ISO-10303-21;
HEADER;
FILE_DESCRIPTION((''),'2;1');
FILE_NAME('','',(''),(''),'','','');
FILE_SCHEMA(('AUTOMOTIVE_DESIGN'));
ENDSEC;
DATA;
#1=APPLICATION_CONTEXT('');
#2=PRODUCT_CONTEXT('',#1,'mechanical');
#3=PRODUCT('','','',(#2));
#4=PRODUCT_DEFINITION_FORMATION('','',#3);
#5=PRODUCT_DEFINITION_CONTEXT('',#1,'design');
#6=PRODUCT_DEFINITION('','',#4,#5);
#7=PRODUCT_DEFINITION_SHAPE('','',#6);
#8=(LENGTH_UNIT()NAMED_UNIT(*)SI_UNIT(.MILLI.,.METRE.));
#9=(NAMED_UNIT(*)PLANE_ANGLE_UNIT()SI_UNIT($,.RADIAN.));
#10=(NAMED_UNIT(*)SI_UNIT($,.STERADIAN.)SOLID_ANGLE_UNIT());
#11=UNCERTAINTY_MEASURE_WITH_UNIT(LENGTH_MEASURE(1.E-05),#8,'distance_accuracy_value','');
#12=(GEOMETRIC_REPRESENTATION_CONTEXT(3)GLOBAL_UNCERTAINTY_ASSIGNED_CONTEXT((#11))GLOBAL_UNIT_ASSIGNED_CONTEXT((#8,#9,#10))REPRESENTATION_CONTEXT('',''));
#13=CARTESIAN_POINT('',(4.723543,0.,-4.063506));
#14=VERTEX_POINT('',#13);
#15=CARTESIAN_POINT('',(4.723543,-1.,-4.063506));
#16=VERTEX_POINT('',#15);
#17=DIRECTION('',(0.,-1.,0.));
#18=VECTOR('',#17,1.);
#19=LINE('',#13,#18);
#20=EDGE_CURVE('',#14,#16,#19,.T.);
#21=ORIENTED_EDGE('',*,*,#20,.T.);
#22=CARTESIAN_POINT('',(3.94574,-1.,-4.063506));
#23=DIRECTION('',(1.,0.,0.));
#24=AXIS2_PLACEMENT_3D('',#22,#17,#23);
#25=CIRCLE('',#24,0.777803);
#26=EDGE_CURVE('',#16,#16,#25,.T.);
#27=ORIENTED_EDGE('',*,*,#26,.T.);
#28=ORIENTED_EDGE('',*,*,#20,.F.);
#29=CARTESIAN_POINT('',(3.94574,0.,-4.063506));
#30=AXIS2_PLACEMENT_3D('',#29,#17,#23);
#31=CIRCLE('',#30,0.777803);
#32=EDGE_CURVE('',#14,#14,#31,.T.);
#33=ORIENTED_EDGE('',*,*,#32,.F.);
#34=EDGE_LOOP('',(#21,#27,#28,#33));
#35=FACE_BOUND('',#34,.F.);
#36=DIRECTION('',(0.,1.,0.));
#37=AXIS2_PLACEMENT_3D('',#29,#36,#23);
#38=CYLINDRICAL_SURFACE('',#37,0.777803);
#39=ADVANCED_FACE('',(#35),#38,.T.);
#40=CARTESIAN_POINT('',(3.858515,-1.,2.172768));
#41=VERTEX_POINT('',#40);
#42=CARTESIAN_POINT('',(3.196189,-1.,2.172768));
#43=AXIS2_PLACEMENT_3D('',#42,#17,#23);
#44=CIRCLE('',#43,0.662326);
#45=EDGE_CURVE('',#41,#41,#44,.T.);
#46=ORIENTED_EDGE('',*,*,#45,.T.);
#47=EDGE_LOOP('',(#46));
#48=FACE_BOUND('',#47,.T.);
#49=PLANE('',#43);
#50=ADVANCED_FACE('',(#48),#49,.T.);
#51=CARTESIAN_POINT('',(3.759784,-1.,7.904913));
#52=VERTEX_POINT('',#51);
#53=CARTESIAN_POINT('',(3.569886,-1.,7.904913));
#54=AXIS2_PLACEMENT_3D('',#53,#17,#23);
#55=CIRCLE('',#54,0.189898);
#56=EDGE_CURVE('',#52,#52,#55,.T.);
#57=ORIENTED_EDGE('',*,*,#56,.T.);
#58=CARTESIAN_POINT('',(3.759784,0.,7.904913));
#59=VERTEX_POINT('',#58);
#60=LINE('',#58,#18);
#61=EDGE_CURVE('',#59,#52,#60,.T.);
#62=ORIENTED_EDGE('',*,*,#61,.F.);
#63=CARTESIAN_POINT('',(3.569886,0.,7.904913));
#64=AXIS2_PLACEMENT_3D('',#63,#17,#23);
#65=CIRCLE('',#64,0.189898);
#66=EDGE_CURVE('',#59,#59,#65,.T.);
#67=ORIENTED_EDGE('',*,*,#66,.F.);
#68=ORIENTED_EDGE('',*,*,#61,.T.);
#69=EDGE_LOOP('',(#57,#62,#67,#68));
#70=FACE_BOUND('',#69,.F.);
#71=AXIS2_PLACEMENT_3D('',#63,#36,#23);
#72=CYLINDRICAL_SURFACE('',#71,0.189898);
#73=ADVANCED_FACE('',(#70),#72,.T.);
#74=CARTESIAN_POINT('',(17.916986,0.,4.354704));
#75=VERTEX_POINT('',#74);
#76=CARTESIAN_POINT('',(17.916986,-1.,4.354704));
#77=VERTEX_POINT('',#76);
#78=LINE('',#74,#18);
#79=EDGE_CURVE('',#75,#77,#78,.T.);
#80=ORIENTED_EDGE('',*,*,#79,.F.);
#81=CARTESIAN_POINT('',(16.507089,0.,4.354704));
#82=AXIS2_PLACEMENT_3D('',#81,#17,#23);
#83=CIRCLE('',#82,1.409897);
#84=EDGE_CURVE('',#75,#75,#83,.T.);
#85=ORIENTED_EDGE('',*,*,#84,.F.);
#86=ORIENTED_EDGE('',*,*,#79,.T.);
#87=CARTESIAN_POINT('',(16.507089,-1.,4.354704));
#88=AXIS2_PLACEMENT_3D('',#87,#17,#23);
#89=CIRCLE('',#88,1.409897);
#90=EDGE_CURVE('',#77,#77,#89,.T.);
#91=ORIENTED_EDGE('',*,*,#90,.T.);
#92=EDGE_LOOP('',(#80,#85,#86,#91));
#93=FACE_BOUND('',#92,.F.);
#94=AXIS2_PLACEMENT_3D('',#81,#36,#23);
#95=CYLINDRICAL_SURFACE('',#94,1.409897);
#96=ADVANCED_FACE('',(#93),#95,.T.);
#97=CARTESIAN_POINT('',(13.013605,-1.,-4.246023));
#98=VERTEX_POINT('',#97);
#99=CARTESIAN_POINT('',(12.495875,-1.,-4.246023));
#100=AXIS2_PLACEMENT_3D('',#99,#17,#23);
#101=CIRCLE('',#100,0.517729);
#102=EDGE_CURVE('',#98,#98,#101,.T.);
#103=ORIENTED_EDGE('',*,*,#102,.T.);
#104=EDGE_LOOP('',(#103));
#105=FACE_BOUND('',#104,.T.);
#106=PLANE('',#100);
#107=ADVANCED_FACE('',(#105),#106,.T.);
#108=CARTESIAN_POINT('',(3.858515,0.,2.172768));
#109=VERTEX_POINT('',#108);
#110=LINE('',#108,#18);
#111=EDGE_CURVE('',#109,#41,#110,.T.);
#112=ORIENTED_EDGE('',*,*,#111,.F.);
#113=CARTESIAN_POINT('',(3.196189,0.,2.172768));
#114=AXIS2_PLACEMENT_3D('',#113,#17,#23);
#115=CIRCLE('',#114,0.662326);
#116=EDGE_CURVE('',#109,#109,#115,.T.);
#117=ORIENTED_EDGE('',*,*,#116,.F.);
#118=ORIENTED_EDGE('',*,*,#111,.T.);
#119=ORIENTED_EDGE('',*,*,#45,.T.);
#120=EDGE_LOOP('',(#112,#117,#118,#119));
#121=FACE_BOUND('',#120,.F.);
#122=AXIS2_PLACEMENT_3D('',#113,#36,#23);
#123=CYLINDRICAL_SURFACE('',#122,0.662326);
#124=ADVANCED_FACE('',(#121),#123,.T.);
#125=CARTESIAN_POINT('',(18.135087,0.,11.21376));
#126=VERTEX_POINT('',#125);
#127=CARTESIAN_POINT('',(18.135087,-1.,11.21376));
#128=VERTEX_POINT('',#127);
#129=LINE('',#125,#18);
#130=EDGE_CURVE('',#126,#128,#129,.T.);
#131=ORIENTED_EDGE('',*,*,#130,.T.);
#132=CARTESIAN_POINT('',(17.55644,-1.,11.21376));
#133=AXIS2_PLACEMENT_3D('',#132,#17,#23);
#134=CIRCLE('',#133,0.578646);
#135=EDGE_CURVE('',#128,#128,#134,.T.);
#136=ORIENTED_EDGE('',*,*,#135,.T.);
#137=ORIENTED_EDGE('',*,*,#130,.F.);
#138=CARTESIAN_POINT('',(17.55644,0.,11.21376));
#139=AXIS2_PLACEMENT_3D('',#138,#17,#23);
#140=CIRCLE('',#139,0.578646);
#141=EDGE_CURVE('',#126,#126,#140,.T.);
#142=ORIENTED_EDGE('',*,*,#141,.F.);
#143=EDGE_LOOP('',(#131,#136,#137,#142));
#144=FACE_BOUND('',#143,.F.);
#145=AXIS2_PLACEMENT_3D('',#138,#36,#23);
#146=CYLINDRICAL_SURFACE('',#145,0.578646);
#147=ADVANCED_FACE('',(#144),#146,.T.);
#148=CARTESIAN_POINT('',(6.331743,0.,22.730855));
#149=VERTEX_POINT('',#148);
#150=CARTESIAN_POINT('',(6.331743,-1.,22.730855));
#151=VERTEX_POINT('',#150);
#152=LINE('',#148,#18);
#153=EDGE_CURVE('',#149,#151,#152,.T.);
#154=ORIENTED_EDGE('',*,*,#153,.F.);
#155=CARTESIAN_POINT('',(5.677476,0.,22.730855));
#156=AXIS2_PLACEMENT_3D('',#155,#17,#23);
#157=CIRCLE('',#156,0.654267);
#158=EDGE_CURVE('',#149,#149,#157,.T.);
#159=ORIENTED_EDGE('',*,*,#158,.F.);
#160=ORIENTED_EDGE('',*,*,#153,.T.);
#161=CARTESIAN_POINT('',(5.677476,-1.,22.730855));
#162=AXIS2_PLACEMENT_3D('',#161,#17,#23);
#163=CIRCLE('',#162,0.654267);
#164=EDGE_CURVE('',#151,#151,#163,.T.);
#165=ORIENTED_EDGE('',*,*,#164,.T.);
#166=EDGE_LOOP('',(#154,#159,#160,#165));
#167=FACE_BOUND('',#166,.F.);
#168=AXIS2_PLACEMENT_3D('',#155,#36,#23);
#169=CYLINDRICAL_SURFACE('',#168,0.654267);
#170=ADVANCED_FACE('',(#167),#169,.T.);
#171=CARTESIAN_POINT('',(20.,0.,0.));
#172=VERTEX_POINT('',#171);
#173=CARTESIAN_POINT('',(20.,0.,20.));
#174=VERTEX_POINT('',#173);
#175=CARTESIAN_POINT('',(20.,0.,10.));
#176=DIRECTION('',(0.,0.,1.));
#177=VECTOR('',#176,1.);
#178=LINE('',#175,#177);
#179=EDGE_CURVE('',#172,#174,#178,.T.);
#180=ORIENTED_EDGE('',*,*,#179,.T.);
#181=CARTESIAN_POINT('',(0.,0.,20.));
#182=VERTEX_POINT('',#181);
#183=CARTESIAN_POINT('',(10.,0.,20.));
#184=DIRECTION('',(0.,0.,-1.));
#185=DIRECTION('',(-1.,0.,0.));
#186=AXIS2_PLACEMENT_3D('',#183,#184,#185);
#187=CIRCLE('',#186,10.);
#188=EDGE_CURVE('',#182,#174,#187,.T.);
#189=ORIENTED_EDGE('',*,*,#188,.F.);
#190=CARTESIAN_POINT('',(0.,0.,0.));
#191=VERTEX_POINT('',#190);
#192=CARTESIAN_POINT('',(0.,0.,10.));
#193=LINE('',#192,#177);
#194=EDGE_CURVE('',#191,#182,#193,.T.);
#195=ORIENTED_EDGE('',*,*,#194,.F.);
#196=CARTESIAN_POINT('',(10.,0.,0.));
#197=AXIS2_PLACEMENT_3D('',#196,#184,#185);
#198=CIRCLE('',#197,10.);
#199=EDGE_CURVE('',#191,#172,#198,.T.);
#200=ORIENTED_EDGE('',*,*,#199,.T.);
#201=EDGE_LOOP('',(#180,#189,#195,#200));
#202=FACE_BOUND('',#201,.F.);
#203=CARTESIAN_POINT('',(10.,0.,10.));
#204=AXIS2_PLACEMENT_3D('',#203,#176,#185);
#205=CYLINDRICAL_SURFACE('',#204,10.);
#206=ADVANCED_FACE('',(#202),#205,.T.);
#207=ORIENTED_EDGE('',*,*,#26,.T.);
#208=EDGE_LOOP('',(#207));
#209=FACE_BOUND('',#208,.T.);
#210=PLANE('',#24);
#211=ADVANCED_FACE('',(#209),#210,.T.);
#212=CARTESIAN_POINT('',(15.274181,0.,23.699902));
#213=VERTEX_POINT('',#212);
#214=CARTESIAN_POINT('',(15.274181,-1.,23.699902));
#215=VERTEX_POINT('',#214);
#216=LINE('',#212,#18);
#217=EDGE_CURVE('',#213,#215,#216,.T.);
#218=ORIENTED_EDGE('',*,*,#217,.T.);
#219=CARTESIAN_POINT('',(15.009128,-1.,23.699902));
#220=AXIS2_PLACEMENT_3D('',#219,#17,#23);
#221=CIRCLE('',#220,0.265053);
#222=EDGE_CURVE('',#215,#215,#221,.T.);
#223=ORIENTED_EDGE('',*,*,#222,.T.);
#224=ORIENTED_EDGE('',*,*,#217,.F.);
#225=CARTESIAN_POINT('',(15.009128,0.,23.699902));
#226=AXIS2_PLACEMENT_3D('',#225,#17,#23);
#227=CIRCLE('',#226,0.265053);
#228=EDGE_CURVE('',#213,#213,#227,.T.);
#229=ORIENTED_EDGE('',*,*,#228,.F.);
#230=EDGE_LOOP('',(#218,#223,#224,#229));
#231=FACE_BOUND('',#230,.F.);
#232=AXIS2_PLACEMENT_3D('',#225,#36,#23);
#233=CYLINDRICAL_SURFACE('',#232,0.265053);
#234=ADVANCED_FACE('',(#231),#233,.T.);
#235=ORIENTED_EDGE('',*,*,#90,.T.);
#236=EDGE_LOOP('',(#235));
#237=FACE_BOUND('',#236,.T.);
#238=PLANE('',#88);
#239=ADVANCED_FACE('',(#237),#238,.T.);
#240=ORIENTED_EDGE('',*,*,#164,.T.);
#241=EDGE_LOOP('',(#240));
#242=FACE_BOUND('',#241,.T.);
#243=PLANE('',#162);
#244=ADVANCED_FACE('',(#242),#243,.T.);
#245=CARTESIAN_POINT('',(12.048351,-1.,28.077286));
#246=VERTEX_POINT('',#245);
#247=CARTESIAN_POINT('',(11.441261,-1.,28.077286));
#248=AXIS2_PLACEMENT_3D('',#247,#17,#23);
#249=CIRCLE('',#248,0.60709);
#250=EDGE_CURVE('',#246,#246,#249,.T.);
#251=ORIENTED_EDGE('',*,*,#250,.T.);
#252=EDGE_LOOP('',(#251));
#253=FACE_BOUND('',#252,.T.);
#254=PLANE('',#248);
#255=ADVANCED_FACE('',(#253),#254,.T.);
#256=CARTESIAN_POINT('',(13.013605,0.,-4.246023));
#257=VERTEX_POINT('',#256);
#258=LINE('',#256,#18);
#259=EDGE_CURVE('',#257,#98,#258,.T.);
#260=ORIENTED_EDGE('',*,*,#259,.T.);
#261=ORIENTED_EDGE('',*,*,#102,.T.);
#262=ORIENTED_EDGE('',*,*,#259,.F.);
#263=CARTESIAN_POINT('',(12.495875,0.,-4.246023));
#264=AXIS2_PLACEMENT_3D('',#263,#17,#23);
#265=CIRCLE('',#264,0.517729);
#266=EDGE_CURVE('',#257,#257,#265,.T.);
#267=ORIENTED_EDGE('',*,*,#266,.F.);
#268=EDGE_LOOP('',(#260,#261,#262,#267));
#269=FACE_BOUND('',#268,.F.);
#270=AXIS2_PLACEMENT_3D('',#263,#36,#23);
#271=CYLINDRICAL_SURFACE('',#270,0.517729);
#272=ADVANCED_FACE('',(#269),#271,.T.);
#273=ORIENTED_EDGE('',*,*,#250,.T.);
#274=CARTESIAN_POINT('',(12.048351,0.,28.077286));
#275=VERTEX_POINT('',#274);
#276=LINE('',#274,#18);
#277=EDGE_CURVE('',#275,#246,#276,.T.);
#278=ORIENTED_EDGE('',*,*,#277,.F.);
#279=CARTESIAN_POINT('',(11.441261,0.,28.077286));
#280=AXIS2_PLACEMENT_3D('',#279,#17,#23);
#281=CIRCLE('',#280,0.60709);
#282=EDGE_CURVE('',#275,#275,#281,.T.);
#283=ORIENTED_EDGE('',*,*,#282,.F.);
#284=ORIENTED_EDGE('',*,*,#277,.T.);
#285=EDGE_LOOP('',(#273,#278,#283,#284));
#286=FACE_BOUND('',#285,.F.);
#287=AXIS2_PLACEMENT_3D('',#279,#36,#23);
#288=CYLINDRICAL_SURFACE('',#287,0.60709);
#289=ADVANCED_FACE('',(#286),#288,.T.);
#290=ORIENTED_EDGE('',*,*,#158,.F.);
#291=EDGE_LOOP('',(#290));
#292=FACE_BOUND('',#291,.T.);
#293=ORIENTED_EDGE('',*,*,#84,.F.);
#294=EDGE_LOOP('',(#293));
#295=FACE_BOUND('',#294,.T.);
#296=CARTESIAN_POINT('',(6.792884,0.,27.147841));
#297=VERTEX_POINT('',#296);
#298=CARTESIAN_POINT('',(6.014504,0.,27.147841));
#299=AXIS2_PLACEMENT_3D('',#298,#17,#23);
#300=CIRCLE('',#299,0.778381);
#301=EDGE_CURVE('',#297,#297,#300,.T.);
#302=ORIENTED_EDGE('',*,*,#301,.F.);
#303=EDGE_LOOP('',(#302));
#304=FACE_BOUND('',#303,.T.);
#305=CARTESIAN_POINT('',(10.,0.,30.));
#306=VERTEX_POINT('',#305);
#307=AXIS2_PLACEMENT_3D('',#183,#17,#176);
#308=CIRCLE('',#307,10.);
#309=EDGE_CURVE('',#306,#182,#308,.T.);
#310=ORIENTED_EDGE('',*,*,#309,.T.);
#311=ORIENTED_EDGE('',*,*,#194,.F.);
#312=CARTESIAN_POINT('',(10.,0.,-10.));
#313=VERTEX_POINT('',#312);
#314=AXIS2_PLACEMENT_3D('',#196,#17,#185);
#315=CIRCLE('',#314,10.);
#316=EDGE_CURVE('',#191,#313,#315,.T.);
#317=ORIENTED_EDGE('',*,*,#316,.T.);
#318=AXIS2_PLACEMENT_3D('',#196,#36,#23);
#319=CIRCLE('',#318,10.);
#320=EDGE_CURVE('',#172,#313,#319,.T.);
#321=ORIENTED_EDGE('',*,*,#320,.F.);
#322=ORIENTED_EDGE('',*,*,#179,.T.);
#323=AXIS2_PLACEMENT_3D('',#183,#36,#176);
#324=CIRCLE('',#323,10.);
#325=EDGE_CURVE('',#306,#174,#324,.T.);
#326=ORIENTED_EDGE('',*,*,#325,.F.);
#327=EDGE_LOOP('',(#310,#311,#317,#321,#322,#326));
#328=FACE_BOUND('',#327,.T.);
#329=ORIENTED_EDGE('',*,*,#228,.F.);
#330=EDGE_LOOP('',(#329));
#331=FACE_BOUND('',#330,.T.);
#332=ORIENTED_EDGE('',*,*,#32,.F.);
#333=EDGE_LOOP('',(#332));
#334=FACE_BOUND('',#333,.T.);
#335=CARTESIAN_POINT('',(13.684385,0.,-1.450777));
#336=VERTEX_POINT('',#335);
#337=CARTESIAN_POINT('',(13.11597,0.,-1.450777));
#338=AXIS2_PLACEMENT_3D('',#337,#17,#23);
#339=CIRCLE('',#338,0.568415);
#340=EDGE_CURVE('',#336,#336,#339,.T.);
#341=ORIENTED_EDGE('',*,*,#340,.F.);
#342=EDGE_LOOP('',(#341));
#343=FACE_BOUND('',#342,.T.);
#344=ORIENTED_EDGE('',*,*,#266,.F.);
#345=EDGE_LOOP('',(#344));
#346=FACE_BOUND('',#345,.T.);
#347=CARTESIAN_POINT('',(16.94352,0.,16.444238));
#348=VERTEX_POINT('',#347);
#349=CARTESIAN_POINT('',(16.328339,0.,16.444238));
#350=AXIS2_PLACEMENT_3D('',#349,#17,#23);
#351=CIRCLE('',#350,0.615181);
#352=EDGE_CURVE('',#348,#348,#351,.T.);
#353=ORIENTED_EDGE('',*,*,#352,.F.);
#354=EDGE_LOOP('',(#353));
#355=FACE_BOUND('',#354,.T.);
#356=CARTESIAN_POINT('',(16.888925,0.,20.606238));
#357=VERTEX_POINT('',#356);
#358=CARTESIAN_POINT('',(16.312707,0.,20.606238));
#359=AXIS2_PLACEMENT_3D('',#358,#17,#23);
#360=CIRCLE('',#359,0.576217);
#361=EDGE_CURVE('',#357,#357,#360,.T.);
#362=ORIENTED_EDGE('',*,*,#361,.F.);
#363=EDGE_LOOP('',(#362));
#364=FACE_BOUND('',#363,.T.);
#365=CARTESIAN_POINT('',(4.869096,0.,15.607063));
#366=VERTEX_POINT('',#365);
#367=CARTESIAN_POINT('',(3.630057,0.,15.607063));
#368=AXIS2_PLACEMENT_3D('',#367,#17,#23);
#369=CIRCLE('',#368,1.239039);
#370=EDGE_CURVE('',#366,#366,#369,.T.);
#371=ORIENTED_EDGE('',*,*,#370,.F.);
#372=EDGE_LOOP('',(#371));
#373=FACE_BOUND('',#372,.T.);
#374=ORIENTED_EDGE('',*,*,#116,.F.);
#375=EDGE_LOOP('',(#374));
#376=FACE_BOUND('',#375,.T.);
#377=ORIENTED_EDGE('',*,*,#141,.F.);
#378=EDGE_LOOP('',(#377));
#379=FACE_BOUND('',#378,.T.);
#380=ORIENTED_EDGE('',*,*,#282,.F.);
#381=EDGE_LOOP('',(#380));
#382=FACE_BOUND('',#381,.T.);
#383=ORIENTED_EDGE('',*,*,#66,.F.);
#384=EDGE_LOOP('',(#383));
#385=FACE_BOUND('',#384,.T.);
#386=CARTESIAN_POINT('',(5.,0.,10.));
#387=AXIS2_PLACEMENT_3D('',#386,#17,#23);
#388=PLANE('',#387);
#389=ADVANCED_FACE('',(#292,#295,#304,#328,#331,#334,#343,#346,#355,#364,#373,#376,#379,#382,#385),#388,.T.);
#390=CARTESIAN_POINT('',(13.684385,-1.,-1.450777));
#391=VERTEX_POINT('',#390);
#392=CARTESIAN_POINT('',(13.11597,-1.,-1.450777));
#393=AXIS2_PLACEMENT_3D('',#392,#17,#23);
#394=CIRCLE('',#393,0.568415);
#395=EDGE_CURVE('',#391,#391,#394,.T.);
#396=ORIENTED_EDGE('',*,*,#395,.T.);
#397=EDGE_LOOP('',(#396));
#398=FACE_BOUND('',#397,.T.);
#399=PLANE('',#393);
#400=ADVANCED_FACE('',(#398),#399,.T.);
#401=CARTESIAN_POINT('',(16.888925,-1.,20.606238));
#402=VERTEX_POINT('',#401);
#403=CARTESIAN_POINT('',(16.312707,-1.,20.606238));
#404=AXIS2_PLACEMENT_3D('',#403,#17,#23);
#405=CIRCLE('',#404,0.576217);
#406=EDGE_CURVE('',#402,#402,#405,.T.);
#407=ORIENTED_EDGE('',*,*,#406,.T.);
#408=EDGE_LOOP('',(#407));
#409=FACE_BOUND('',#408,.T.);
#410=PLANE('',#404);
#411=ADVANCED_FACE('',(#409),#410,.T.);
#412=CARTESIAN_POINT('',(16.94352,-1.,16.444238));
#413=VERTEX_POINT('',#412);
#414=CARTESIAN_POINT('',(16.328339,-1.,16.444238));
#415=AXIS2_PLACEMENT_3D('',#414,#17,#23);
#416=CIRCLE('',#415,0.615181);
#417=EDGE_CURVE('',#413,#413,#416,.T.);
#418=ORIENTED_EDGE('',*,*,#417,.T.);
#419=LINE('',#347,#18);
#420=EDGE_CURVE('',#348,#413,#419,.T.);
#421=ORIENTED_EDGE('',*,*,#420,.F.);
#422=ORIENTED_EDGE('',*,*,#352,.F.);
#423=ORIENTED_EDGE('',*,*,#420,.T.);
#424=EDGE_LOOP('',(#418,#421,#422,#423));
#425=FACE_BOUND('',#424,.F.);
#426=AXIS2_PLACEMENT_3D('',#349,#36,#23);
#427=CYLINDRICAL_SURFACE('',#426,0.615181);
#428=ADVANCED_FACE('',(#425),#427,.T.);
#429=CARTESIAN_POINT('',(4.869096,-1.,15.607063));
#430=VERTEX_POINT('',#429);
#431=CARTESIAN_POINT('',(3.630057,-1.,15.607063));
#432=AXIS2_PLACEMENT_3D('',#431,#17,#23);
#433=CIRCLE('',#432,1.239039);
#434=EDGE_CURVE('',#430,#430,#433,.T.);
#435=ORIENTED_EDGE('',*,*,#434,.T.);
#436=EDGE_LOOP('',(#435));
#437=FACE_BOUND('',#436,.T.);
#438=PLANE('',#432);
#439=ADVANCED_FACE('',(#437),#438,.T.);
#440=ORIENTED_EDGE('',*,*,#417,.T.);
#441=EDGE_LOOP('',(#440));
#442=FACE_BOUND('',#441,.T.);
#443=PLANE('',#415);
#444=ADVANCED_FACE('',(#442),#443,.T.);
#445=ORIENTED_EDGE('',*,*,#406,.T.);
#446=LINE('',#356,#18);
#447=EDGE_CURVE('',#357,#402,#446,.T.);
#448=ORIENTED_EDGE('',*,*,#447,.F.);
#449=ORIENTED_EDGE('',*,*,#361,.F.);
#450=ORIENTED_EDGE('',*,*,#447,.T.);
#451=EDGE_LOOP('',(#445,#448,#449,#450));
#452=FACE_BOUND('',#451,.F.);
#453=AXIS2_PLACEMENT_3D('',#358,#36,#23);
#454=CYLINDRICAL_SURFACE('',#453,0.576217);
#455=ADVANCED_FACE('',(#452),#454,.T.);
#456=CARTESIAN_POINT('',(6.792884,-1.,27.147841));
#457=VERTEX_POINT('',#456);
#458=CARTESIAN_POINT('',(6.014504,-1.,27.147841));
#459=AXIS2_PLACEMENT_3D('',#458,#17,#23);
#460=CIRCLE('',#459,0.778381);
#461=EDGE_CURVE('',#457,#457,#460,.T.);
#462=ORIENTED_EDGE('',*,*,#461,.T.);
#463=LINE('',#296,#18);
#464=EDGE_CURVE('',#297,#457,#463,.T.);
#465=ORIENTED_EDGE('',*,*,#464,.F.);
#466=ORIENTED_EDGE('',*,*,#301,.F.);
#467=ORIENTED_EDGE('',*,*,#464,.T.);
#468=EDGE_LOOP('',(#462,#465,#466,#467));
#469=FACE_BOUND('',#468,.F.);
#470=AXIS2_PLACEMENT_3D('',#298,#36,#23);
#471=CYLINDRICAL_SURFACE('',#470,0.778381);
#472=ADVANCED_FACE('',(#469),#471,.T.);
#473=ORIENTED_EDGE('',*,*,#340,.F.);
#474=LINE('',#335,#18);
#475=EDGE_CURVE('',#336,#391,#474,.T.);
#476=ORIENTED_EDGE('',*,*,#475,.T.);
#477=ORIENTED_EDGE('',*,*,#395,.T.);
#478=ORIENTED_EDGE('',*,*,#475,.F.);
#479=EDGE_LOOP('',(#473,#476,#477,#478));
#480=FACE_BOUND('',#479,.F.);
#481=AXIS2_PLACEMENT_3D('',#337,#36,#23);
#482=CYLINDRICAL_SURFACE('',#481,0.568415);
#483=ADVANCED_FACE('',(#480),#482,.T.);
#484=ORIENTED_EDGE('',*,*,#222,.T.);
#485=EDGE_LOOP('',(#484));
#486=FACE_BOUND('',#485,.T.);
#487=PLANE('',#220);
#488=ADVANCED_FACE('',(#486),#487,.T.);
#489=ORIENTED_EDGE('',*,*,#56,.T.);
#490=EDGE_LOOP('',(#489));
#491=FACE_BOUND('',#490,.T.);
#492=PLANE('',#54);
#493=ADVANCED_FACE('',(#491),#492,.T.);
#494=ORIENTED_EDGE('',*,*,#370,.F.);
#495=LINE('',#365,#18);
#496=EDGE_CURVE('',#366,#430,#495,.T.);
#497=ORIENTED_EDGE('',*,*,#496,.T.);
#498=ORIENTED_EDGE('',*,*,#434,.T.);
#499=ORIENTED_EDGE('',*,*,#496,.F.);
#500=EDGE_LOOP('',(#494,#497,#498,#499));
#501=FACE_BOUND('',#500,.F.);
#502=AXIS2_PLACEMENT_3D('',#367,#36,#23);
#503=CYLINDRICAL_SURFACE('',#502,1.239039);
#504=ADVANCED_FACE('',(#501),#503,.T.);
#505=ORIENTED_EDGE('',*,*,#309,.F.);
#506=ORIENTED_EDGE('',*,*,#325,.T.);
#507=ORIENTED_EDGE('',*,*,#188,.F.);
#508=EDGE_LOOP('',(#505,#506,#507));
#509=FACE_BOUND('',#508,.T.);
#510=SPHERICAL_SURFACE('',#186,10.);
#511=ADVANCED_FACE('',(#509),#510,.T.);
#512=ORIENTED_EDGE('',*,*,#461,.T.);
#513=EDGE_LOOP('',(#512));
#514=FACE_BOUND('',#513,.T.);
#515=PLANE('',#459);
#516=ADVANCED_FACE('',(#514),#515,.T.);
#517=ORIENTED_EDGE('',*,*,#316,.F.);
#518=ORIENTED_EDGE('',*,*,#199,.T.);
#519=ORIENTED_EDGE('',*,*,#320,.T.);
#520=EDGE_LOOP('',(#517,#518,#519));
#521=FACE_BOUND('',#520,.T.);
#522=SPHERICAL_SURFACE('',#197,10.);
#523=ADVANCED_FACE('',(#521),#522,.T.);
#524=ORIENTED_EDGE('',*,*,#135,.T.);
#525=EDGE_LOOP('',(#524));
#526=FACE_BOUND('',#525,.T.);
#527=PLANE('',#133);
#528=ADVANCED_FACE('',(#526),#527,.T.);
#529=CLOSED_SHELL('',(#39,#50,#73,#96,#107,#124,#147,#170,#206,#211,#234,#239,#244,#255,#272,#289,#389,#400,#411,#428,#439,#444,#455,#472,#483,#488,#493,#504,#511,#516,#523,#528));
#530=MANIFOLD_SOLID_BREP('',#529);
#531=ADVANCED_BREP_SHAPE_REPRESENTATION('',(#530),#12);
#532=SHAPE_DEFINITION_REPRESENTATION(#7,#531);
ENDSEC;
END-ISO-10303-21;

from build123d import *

# Parameters (mm, degrees)
F0_W     = 10
F0_H     = 20
F1_ANGLE = 180
F2_R     = 0.6542669189
F2_R_2   = 0.5762174249
F2_R_3   = 1.2390393019
F2_R_4   = 1.4098966941
F2_R_5   = 0.189897881
F2_R_6   = 0.6151811848
F2_R_7   = 0.7778029264
F2_R_8   = 0.6623255224
F2_R_9   = 0.6070903234
F2_R_10  = 0.7783808961
F2_R_11  = 0.265053414
F2_R_12  = 0.5177294077
F2_R_13  = 0.5684145952
F2_R_14  = 0.5786464401
F4_DEPTH = 1


# Not quite as in the source:
# - the program builds the solid bodies; features that only make, move or delete a surface that nothing else refers to are left out


with BuildPart() as f1:
    # F0 (on Front) → F1 (revolve)
    with BuildSketch(Plane.XZ):
        with Locations((5, 10)):
            Rectangle(F0_W, F0_H)
        with BuildLine():
            Line((10, 0), (0, 0))
            ThreePointArc((0, 0), (2.9289321881, -7.0710678119), (10, -10))
            Line((10, -10), (10, 0))
        make_face()
        with BuildLine():
            ThreePointArc((10, 30), (2.9289321881, 27.0710678119), (0, 20))
            Line((0, 20), (10, 20))
            Line((10, 20), (10, 30))
        make_face()
    revolve(axis=Axis((10, 0, 10), (0, 0, -1)), revolution_arc=F1_ANGLE)

    # F2 (on face) → F4 (join)
    with BuildSketch(Plane.XZ):
        with Locations((5.6774760596, 22.7308552712)):
            Circle(F2_R)
        with Locations((16.3127072155, 20.606238395)):
            Circle(F2_R_2)
        with Locations((3.6300569773, 15.6070627272)):
            Circle(F2_R_3)
        with Locations((16.507089138, 4.3547041714)):
            Circle(F2_R_4)
        with Locations((3.5698860884, 7.9049132764)):
            Circle(F2_R_5)
        with Locations((16.3283385336, 16.4442379028)):
            Circle(F2_R_6)
        with Locations((3.9457399398, -4.0635056794)):
            Circle(F2_R_7)
        with Locations((3.19618918, 2.172768116)):
            Circle(F2_R_8)
        with Locations((11.4412605762, 28.0772857368)):
            Circle(F2_R_9)
        with Locations((6.0145035386, 27.1478407085)):
            Circle(F2_R_10)
        with Locations((15.0091275573, 23.699901998)):
            Circle(F2_R_11)
        with Locations((12.4958753586, -4.2460225523)):
            Circle(F2_R_12)
        with Locations((13.1159704179, -1.4507770538)):
            Circle(F2_R_13)
        with Locations((17.5564400852, 11.2137598917)):
            Circle(F2_R_14)
    extrude(amount=F4_DEPTH)


solid = f1.part
